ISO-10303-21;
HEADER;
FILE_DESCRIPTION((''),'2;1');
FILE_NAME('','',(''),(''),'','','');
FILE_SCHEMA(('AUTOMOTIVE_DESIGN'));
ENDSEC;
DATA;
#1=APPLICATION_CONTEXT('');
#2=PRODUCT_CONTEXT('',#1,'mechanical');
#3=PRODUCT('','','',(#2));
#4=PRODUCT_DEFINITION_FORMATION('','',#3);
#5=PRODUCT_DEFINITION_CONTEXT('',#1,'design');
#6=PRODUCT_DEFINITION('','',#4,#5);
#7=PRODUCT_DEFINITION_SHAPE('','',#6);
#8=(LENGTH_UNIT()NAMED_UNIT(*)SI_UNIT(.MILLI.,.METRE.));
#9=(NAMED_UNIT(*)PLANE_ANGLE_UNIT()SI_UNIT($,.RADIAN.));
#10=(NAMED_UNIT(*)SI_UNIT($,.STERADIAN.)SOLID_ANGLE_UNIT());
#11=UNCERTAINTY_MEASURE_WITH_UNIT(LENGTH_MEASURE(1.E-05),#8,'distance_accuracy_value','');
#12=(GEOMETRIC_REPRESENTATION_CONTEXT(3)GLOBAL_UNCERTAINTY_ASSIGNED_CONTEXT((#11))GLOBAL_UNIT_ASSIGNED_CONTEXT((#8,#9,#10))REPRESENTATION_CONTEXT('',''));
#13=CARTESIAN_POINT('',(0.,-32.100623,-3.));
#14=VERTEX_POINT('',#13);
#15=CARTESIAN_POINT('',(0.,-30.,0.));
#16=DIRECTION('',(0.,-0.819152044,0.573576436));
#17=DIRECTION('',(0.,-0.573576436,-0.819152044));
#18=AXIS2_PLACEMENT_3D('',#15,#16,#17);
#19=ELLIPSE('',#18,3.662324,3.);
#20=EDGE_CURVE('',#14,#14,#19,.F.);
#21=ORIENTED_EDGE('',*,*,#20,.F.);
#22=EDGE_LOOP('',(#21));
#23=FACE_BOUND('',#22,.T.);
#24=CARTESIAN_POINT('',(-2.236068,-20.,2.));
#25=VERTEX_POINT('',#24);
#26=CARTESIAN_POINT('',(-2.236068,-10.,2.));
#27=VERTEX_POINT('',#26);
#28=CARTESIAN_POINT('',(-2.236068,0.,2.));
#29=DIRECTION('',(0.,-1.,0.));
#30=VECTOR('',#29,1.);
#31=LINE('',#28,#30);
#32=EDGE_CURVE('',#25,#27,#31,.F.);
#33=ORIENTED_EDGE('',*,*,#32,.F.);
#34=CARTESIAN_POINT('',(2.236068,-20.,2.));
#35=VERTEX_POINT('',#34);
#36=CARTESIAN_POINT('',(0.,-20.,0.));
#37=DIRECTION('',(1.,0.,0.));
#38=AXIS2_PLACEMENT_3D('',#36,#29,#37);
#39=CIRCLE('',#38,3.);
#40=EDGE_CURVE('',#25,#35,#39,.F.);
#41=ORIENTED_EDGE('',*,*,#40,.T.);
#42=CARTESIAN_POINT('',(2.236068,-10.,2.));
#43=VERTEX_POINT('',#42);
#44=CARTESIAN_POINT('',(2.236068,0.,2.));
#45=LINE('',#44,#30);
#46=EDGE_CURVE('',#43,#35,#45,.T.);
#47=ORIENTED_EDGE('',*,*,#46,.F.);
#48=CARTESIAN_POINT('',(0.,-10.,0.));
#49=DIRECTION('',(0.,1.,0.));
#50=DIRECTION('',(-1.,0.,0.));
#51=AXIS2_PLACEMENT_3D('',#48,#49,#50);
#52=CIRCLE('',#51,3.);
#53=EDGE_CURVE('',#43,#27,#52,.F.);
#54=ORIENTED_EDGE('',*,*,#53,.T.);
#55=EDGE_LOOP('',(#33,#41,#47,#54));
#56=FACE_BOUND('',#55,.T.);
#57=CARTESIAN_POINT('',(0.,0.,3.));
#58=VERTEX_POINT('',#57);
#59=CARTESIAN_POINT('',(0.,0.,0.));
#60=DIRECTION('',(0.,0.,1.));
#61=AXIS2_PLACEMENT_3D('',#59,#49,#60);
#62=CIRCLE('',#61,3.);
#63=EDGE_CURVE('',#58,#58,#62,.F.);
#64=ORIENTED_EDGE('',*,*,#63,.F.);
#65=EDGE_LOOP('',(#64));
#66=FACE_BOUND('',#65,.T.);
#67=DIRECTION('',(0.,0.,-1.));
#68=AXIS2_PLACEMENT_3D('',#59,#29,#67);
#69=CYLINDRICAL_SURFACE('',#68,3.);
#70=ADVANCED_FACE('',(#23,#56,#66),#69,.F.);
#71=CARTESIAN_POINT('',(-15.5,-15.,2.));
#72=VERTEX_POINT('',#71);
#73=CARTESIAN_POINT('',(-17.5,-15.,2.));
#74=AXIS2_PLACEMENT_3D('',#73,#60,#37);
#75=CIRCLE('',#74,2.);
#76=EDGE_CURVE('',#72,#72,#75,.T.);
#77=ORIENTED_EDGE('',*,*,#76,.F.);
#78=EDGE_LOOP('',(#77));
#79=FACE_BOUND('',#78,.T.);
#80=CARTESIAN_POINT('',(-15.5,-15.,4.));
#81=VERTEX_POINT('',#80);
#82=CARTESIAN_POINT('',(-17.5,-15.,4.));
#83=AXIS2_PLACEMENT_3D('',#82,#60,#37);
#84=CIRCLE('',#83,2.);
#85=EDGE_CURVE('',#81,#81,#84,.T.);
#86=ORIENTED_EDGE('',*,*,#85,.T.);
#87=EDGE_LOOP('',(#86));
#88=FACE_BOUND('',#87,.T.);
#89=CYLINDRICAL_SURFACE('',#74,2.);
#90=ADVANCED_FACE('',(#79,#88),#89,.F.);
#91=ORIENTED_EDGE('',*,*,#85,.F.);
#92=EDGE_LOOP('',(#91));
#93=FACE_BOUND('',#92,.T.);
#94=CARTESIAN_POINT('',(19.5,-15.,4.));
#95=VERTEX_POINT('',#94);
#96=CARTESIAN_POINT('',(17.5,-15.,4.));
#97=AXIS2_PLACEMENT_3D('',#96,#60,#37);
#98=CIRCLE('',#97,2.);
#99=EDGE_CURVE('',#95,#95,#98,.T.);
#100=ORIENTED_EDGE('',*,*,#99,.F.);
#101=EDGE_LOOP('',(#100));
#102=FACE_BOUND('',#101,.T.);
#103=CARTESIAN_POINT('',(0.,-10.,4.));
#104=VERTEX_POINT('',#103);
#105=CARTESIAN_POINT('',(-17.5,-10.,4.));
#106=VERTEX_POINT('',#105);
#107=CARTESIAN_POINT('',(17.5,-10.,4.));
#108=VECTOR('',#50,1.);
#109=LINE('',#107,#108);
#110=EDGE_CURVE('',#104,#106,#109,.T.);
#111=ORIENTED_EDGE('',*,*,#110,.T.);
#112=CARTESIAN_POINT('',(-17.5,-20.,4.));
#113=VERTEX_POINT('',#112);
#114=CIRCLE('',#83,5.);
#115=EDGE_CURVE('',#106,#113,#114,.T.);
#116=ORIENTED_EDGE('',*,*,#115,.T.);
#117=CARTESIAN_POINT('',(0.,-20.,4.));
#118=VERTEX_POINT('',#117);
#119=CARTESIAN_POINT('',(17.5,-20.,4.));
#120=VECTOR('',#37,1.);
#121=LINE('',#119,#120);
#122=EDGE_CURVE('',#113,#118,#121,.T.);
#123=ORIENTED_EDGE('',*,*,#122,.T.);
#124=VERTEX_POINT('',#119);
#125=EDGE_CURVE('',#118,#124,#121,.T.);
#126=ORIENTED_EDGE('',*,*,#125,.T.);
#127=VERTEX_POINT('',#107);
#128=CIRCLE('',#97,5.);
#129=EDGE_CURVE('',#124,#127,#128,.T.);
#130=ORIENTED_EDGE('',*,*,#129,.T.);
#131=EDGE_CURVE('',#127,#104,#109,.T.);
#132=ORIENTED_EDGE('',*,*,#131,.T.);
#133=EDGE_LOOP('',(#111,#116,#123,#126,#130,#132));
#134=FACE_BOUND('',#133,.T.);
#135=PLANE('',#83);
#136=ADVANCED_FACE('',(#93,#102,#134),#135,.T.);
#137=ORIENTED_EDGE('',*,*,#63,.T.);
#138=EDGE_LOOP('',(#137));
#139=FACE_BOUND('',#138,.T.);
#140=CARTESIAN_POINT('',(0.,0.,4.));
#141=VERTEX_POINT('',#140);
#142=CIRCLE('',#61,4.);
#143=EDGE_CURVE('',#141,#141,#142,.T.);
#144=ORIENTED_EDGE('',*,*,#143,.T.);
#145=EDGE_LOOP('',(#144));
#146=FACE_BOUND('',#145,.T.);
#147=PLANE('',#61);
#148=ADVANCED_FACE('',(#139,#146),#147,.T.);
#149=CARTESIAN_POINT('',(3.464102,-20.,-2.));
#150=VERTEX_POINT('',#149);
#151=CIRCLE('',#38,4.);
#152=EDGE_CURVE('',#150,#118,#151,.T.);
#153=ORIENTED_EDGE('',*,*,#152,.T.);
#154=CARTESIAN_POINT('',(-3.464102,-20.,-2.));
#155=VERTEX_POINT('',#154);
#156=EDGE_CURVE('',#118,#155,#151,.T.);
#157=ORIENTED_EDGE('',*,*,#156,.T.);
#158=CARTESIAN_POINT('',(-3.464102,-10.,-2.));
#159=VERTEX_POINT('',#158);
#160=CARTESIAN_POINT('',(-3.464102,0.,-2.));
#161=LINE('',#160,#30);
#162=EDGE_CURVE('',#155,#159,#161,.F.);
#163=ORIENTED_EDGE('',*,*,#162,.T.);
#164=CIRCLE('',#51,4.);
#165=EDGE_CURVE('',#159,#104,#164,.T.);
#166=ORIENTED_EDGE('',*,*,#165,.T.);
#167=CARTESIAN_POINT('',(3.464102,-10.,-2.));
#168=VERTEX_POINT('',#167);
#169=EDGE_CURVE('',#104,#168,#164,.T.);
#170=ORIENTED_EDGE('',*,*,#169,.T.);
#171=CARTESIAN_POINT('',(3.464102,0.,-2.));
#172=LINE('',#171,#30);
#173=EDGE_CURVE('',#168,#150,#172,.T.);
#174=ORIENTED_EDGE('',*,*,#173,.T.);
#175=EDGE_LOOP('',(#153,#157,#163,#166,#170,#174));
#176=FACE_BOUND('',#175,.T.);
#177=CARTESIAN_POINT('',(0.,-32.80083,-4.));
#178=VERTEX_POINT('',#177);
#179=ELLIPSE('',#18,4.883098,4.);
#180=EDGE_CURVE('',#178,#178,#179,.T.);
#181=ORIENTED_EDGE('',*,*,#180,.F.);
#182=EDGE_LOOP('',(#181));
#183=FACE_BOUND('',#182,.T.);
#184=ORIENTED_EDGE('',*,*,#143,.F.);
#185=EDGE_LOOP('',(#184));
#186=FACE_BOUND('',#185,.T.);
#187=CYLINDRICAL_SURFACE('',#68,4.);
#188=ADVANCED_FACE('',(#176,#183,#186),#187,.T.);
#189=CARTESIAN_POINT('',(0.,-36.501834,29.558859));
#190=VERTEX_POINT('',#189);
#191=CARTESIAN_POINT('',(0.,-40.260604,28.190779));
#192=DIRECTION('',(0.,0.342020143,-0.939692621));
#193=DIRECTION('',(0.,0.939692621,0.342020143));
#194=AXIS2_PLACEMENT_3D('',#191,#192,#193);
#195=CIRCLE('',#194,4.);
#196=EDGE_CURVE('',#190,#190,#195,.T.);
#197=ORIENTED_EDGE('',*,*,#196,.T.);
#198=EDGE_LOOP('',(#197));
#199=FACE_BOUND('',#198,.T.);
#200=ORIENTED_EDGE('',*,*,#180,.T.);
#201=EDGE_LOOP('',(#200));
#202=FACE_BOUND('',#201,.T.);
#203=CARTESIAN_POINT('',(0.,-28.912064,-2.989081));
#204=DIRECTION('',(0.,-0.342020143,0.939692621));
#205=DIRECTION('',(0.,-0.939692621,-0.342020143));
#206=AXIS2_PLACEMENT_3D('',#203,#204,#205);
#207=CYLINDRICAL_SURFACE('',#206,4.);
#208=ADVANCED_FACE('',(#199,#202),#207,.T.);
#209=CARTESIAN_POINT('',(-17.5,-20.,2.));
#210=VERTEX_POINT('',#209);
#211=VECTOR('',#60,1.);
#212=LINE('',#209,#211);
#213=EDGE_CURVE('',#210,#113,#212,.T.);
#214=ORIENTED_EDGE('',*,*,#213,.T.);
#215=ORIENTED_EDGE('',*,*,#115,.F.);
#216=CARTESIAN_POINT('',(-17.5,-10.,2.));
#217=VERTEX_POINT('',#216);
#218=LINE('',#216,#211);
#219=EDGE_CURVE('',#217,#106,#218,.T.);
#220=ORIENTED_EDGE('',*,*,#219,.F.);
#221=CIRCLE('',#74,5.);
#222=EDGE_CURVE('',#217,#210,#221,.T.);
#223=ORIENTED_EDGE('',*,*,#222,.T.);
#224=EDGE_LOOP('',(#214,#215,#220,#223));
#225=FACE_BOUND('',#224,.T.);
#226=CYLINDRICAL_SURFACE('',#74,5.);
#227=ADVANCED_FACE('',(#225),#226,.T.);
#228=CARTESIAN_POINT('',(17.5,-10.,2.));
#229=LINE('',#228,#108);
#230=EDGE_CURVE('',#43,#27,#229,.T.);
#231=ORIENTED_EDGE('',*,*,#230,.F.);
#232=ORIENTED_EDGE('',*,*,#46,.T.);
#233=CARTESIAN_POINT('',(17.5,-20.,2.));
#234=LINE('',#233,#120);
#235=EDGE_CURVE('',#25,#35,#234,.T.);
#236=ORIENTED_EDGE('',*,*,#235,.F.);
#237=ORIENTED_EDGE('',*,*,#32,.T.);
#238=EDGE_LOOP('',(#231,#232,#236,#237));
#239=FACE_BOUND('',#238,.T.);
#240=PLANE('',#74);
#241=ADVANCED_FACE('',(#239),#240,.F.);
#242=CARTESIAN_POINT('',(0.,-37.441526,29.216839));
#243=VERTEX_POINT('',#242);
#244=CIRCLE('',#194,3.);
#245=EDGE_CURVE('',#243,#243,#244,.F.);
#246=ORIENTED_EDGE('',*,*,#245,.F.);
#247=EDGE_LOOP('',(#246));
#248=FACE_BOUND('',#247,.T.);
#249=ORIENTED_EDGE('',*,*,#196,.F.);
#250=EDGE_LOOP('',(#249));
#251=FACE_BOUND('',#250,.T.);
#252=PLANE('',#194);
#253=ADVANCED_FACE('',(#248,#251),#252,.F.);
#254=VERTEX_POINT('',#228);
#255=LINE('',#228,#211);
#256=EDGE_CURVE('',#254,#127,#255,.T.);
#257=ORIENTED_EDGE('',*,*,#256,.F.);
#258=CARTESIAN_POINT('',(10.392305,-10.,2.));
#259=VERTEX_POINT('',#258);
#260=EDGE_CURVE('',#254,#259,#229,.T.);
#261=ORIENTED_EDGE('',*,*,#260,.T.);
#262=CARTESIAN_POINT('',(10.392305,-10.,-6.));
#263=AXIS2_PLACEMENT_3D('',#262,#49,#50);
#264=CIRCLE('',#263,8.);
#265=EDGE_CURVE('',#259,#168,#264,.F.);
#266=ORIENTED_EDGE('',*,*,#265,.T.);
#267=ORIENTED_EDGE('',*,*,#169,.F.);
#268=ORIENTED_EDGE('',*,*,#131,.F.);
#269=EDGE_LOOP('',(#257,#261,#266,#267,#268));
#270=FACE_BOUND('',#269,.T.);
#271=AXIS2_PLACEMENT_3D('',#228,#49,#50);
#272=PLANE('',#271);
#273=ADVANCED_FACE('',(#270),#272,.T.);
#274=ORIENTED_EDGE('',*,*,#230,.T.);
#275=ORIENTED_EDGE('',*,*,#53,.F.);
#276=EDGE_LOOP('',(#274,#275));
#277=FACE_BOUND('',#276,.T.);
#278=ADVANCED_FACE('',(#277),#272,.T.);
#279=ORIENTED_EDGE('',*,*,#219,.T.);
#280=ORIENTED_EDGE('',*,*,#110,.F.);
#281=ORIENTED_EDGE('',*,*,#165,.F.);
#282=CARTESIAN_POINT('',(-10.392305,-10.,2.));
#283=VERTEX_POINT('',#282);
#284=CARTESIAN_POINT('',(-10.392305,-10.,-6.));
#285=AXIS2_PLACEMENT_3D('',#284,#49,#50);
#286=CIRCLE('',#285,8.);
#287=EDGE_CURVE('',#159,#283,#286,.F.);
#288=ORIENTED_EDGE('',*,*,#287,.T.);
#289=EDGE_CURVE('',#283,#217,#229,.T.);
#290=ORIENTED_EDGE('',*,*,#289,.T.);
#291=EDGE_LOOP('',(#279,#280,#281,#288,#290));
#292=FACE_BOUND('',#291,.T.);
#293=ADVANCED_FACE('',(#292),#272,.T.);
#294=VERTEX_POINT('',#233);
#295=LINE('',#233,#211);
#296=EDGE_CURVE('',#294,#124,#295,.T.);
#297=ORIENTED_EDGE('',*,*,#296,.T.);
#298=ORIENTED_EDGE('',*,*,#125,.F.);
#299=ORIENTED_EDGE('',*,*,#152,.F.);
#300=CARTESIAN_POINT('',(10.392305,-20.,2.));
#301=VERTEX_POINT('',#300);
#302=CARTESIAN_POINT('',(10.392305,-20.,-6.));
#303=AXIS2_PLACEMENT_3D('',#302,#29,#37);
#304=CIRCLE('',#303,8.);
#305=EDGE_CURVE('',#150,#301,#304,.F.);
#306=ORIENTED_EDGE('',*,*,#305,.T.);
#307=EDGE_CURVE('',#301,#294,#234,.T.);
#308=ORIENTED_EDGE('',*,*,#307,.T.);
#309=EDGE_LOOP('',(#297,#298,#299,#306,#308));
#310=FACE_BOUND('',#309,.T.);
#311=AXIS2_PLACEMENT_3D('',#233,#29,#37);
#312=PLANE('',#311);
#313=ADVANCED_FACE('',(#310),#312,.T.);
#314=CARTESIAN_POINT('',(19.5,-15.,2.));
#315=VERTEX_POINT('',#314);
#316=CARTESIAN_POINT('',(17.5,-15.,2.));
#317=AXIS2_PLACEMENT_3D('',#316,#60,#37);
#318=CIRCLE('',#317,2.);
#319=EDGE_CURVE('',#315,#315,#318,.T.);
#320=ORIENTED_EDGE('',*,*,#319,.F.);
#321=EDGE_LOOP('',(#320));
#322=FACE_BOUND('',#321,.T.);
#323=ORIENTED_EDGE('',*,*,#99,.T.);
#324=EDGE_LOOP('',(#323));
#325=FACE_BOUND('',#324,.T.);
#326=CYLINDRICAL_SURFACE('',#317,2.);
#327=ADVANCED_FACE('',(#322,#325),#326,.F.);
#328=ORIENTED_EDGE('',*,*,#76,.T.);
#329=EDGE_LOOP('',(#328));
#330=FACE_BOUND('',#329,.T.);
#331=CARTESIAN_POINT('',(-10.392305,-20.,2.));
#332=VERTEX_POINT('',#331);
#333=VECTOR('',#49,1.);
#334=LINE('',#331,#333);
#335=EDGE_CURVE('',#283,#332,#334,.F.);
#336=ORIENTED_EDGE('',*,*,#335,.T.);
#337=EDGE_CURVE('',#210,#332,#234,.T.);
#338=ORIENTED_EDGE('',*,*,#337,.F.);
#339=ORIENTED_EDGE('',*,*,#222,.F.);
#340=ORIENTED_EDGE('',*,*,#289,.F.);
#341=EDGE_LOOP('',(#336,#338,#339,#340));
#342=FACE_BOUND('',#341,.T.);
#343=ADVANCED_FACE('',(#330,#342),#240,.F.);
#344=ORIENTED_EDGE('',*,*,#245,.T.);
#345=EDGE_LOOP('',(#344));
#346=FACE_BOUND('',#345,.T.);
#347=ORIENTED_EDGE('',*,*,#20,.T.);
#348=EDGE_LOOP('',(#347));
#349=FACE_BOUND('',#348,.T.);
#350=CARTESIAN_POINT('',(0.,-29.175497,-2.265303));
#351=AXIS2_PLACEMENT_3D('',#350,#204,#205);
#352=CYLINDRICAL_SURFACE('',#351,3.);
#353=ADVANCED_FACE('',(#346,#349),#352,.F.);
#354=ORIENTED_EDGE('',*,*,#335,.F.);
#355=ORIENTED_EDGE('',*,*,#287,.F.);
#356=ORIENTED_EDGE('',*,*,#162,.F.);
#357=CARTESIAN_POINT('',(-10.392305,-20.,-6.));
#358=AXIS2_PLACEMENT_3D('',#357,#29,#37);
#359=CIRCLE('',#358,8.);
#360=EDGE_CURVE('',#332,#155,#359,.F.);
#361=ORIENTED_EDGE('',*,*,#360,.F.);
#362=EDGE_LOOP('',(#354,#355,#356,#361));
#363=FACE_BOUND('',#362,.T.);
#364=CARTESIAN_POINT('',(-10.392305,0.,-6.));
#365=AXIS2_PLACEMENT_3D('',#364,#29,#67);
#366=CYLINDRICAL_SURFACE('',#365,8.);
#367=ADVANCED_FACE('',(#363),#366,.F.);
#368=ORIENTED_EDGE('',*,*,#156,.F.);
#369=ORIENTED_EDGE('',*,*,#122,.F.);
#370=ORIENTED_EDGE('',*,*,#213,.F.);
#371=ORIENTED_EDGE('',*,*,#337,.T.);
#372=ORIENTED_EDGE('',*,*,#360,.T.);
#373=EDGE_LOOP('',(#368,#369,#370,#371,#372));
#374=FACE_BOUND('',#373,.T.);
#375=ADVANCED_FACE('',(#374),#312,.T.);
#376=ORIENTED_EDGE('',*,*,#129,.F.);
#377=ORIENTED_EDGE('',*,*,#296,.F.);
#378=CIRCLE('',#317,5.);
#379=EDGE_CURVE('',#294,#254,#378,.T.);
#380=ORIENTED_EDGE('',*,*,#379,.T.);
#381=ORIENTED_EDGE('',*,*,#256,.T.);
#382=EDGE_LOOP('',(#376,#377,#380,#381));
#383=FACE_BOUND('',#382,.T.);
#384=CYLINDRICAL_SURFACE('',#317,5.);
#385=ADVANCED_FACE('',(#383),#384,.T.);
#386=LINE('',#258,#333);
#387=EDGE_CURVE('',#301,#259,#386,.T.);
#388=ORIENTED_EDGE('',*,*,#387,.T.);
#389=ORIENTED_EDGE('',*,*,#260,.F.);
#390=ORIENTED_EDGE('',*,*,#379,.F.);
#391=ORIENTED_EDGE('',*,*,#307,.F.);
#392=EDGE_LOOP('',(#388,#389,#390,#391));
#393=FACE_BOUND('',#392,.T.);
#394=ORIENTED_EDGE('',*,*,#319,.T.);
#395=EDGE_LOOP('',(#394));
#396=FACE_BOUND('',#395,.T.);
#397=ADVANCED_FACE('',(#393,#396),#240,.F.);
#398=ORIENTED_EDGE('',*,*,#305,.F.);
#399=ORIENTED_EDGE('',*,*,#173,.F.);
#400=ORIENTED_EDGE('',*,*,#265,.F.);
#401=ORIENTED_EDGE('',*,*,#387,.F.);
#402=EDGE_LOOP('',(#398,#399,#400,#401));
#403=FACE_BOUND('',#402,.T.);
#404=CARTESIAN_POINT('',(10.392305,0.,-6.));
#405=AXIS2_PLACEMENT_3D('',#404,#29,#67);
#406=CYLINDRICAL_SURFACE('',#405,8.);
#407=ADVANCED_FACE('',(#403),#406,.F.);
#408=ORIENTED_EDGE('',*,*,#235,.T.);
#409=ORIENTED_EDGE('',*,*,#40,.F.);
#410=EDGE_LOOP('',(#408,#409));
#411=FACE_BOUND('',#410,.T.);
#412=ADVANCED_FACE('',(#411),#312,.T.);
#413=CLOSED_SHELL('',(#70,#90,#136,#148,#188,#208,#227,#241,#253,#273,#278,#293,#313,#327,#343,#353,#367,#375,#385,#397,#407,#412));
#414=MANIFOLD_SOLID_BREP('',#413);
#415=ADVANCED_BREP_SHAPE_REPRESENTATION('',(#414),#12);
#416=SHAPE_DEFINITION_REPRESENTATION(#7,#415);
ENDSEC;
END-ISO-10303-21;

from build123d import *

# Parameters (mm, degrees)
SKETCH1_R           = 4
SKETCH1_R_2         = 3
SKETCH3_R           = 2
BOSS_EXTRUDE1_DEPTH = 2
FILLET1_R           = 8


with BuildPart() as part:
    # Sweep1: sweep along a path in Sketch2
    with BuildLine(Plane(origin=(0, 0, 0), x_dir=(0, 0, -1), z_dir=(1, 0, 0))) as sweep1_path:
        Line((0, 0), (0, -30))
        Line((0, -30), (-28.190778624, -40.2606043))
    # Sketch1 → Sweep1 (sweep)
    with BuildSketch(Plane(origin=(0, 0, 0), x_dir=(1, 0, 0), z_dir=(0, 1, 0))):
        Circle(SKETCH1_R)
        Circle(SKETCH1_R_2, mode=Mode.SUBTRACT)
    sweep(path=sweep1_path.line, transition=Transition.RIGHT)

    # Sketch3 → Boss-Extrude1 (add)
    with BuildSketch(Plane.XY.offset(4)):
        with BuildLine():
            Line((17.5, -20), (-17.5, -20))
            ThreePointArc((-17.5, -20), (-22.5, -15), (-17.5, -10))
            Line((-17.5, -10), (17.5, -10))
            ThreePointArc((17.5, -10), (22.5, -15), (17.5, -20))
        make_face()
        with Locations((17.5, -15)):
            Circle(SKETCH3_R, mode=Mode.SUBTRACT)
        with Locations((-17.5, -15)):
            Circle(SKETCH3_R, mode=Mode.SUBTRACT)
    extrude(amount=-BOSS_EXTRUDE1_DEPTH)

    # Fillet1
    # the kernel refuses this fillet: 8 mm, written as the material it adds along each edge
    with BuildSketch(Plane(origin=(-3.464101615, -10, 2), x_dir=(0, 0, -1), z_dir=(0, -1, 0))) as fillet1_piece_1:
        with BuildLine():
            CenterArc((8, -6.92820323), FILLET1_R, 120, 60)
            Line((0, -6.92820323), (0, 0))
            ThreePointArc((0, 0), (2, -0.535898385), (4, 0))
        make_face()
    extrude(amount=10)
    with BuildSketch(Plane(origin=(3.464101615, -10, 2), x_dir=(0, 0, -1), z_dir=(0, -1, 0))) as fillet1_piece_2:
        with BuildLine():
            CenterArc((8, 6.92820323), FILLET1_R, 180, 60)
            Line((0, 6.92820323), (0, 0))
            ThreePointArc((0, 0), (2, 0.535898385), (4, 0))
        make_face()
    extrude(amount=10)


solid = part.part
